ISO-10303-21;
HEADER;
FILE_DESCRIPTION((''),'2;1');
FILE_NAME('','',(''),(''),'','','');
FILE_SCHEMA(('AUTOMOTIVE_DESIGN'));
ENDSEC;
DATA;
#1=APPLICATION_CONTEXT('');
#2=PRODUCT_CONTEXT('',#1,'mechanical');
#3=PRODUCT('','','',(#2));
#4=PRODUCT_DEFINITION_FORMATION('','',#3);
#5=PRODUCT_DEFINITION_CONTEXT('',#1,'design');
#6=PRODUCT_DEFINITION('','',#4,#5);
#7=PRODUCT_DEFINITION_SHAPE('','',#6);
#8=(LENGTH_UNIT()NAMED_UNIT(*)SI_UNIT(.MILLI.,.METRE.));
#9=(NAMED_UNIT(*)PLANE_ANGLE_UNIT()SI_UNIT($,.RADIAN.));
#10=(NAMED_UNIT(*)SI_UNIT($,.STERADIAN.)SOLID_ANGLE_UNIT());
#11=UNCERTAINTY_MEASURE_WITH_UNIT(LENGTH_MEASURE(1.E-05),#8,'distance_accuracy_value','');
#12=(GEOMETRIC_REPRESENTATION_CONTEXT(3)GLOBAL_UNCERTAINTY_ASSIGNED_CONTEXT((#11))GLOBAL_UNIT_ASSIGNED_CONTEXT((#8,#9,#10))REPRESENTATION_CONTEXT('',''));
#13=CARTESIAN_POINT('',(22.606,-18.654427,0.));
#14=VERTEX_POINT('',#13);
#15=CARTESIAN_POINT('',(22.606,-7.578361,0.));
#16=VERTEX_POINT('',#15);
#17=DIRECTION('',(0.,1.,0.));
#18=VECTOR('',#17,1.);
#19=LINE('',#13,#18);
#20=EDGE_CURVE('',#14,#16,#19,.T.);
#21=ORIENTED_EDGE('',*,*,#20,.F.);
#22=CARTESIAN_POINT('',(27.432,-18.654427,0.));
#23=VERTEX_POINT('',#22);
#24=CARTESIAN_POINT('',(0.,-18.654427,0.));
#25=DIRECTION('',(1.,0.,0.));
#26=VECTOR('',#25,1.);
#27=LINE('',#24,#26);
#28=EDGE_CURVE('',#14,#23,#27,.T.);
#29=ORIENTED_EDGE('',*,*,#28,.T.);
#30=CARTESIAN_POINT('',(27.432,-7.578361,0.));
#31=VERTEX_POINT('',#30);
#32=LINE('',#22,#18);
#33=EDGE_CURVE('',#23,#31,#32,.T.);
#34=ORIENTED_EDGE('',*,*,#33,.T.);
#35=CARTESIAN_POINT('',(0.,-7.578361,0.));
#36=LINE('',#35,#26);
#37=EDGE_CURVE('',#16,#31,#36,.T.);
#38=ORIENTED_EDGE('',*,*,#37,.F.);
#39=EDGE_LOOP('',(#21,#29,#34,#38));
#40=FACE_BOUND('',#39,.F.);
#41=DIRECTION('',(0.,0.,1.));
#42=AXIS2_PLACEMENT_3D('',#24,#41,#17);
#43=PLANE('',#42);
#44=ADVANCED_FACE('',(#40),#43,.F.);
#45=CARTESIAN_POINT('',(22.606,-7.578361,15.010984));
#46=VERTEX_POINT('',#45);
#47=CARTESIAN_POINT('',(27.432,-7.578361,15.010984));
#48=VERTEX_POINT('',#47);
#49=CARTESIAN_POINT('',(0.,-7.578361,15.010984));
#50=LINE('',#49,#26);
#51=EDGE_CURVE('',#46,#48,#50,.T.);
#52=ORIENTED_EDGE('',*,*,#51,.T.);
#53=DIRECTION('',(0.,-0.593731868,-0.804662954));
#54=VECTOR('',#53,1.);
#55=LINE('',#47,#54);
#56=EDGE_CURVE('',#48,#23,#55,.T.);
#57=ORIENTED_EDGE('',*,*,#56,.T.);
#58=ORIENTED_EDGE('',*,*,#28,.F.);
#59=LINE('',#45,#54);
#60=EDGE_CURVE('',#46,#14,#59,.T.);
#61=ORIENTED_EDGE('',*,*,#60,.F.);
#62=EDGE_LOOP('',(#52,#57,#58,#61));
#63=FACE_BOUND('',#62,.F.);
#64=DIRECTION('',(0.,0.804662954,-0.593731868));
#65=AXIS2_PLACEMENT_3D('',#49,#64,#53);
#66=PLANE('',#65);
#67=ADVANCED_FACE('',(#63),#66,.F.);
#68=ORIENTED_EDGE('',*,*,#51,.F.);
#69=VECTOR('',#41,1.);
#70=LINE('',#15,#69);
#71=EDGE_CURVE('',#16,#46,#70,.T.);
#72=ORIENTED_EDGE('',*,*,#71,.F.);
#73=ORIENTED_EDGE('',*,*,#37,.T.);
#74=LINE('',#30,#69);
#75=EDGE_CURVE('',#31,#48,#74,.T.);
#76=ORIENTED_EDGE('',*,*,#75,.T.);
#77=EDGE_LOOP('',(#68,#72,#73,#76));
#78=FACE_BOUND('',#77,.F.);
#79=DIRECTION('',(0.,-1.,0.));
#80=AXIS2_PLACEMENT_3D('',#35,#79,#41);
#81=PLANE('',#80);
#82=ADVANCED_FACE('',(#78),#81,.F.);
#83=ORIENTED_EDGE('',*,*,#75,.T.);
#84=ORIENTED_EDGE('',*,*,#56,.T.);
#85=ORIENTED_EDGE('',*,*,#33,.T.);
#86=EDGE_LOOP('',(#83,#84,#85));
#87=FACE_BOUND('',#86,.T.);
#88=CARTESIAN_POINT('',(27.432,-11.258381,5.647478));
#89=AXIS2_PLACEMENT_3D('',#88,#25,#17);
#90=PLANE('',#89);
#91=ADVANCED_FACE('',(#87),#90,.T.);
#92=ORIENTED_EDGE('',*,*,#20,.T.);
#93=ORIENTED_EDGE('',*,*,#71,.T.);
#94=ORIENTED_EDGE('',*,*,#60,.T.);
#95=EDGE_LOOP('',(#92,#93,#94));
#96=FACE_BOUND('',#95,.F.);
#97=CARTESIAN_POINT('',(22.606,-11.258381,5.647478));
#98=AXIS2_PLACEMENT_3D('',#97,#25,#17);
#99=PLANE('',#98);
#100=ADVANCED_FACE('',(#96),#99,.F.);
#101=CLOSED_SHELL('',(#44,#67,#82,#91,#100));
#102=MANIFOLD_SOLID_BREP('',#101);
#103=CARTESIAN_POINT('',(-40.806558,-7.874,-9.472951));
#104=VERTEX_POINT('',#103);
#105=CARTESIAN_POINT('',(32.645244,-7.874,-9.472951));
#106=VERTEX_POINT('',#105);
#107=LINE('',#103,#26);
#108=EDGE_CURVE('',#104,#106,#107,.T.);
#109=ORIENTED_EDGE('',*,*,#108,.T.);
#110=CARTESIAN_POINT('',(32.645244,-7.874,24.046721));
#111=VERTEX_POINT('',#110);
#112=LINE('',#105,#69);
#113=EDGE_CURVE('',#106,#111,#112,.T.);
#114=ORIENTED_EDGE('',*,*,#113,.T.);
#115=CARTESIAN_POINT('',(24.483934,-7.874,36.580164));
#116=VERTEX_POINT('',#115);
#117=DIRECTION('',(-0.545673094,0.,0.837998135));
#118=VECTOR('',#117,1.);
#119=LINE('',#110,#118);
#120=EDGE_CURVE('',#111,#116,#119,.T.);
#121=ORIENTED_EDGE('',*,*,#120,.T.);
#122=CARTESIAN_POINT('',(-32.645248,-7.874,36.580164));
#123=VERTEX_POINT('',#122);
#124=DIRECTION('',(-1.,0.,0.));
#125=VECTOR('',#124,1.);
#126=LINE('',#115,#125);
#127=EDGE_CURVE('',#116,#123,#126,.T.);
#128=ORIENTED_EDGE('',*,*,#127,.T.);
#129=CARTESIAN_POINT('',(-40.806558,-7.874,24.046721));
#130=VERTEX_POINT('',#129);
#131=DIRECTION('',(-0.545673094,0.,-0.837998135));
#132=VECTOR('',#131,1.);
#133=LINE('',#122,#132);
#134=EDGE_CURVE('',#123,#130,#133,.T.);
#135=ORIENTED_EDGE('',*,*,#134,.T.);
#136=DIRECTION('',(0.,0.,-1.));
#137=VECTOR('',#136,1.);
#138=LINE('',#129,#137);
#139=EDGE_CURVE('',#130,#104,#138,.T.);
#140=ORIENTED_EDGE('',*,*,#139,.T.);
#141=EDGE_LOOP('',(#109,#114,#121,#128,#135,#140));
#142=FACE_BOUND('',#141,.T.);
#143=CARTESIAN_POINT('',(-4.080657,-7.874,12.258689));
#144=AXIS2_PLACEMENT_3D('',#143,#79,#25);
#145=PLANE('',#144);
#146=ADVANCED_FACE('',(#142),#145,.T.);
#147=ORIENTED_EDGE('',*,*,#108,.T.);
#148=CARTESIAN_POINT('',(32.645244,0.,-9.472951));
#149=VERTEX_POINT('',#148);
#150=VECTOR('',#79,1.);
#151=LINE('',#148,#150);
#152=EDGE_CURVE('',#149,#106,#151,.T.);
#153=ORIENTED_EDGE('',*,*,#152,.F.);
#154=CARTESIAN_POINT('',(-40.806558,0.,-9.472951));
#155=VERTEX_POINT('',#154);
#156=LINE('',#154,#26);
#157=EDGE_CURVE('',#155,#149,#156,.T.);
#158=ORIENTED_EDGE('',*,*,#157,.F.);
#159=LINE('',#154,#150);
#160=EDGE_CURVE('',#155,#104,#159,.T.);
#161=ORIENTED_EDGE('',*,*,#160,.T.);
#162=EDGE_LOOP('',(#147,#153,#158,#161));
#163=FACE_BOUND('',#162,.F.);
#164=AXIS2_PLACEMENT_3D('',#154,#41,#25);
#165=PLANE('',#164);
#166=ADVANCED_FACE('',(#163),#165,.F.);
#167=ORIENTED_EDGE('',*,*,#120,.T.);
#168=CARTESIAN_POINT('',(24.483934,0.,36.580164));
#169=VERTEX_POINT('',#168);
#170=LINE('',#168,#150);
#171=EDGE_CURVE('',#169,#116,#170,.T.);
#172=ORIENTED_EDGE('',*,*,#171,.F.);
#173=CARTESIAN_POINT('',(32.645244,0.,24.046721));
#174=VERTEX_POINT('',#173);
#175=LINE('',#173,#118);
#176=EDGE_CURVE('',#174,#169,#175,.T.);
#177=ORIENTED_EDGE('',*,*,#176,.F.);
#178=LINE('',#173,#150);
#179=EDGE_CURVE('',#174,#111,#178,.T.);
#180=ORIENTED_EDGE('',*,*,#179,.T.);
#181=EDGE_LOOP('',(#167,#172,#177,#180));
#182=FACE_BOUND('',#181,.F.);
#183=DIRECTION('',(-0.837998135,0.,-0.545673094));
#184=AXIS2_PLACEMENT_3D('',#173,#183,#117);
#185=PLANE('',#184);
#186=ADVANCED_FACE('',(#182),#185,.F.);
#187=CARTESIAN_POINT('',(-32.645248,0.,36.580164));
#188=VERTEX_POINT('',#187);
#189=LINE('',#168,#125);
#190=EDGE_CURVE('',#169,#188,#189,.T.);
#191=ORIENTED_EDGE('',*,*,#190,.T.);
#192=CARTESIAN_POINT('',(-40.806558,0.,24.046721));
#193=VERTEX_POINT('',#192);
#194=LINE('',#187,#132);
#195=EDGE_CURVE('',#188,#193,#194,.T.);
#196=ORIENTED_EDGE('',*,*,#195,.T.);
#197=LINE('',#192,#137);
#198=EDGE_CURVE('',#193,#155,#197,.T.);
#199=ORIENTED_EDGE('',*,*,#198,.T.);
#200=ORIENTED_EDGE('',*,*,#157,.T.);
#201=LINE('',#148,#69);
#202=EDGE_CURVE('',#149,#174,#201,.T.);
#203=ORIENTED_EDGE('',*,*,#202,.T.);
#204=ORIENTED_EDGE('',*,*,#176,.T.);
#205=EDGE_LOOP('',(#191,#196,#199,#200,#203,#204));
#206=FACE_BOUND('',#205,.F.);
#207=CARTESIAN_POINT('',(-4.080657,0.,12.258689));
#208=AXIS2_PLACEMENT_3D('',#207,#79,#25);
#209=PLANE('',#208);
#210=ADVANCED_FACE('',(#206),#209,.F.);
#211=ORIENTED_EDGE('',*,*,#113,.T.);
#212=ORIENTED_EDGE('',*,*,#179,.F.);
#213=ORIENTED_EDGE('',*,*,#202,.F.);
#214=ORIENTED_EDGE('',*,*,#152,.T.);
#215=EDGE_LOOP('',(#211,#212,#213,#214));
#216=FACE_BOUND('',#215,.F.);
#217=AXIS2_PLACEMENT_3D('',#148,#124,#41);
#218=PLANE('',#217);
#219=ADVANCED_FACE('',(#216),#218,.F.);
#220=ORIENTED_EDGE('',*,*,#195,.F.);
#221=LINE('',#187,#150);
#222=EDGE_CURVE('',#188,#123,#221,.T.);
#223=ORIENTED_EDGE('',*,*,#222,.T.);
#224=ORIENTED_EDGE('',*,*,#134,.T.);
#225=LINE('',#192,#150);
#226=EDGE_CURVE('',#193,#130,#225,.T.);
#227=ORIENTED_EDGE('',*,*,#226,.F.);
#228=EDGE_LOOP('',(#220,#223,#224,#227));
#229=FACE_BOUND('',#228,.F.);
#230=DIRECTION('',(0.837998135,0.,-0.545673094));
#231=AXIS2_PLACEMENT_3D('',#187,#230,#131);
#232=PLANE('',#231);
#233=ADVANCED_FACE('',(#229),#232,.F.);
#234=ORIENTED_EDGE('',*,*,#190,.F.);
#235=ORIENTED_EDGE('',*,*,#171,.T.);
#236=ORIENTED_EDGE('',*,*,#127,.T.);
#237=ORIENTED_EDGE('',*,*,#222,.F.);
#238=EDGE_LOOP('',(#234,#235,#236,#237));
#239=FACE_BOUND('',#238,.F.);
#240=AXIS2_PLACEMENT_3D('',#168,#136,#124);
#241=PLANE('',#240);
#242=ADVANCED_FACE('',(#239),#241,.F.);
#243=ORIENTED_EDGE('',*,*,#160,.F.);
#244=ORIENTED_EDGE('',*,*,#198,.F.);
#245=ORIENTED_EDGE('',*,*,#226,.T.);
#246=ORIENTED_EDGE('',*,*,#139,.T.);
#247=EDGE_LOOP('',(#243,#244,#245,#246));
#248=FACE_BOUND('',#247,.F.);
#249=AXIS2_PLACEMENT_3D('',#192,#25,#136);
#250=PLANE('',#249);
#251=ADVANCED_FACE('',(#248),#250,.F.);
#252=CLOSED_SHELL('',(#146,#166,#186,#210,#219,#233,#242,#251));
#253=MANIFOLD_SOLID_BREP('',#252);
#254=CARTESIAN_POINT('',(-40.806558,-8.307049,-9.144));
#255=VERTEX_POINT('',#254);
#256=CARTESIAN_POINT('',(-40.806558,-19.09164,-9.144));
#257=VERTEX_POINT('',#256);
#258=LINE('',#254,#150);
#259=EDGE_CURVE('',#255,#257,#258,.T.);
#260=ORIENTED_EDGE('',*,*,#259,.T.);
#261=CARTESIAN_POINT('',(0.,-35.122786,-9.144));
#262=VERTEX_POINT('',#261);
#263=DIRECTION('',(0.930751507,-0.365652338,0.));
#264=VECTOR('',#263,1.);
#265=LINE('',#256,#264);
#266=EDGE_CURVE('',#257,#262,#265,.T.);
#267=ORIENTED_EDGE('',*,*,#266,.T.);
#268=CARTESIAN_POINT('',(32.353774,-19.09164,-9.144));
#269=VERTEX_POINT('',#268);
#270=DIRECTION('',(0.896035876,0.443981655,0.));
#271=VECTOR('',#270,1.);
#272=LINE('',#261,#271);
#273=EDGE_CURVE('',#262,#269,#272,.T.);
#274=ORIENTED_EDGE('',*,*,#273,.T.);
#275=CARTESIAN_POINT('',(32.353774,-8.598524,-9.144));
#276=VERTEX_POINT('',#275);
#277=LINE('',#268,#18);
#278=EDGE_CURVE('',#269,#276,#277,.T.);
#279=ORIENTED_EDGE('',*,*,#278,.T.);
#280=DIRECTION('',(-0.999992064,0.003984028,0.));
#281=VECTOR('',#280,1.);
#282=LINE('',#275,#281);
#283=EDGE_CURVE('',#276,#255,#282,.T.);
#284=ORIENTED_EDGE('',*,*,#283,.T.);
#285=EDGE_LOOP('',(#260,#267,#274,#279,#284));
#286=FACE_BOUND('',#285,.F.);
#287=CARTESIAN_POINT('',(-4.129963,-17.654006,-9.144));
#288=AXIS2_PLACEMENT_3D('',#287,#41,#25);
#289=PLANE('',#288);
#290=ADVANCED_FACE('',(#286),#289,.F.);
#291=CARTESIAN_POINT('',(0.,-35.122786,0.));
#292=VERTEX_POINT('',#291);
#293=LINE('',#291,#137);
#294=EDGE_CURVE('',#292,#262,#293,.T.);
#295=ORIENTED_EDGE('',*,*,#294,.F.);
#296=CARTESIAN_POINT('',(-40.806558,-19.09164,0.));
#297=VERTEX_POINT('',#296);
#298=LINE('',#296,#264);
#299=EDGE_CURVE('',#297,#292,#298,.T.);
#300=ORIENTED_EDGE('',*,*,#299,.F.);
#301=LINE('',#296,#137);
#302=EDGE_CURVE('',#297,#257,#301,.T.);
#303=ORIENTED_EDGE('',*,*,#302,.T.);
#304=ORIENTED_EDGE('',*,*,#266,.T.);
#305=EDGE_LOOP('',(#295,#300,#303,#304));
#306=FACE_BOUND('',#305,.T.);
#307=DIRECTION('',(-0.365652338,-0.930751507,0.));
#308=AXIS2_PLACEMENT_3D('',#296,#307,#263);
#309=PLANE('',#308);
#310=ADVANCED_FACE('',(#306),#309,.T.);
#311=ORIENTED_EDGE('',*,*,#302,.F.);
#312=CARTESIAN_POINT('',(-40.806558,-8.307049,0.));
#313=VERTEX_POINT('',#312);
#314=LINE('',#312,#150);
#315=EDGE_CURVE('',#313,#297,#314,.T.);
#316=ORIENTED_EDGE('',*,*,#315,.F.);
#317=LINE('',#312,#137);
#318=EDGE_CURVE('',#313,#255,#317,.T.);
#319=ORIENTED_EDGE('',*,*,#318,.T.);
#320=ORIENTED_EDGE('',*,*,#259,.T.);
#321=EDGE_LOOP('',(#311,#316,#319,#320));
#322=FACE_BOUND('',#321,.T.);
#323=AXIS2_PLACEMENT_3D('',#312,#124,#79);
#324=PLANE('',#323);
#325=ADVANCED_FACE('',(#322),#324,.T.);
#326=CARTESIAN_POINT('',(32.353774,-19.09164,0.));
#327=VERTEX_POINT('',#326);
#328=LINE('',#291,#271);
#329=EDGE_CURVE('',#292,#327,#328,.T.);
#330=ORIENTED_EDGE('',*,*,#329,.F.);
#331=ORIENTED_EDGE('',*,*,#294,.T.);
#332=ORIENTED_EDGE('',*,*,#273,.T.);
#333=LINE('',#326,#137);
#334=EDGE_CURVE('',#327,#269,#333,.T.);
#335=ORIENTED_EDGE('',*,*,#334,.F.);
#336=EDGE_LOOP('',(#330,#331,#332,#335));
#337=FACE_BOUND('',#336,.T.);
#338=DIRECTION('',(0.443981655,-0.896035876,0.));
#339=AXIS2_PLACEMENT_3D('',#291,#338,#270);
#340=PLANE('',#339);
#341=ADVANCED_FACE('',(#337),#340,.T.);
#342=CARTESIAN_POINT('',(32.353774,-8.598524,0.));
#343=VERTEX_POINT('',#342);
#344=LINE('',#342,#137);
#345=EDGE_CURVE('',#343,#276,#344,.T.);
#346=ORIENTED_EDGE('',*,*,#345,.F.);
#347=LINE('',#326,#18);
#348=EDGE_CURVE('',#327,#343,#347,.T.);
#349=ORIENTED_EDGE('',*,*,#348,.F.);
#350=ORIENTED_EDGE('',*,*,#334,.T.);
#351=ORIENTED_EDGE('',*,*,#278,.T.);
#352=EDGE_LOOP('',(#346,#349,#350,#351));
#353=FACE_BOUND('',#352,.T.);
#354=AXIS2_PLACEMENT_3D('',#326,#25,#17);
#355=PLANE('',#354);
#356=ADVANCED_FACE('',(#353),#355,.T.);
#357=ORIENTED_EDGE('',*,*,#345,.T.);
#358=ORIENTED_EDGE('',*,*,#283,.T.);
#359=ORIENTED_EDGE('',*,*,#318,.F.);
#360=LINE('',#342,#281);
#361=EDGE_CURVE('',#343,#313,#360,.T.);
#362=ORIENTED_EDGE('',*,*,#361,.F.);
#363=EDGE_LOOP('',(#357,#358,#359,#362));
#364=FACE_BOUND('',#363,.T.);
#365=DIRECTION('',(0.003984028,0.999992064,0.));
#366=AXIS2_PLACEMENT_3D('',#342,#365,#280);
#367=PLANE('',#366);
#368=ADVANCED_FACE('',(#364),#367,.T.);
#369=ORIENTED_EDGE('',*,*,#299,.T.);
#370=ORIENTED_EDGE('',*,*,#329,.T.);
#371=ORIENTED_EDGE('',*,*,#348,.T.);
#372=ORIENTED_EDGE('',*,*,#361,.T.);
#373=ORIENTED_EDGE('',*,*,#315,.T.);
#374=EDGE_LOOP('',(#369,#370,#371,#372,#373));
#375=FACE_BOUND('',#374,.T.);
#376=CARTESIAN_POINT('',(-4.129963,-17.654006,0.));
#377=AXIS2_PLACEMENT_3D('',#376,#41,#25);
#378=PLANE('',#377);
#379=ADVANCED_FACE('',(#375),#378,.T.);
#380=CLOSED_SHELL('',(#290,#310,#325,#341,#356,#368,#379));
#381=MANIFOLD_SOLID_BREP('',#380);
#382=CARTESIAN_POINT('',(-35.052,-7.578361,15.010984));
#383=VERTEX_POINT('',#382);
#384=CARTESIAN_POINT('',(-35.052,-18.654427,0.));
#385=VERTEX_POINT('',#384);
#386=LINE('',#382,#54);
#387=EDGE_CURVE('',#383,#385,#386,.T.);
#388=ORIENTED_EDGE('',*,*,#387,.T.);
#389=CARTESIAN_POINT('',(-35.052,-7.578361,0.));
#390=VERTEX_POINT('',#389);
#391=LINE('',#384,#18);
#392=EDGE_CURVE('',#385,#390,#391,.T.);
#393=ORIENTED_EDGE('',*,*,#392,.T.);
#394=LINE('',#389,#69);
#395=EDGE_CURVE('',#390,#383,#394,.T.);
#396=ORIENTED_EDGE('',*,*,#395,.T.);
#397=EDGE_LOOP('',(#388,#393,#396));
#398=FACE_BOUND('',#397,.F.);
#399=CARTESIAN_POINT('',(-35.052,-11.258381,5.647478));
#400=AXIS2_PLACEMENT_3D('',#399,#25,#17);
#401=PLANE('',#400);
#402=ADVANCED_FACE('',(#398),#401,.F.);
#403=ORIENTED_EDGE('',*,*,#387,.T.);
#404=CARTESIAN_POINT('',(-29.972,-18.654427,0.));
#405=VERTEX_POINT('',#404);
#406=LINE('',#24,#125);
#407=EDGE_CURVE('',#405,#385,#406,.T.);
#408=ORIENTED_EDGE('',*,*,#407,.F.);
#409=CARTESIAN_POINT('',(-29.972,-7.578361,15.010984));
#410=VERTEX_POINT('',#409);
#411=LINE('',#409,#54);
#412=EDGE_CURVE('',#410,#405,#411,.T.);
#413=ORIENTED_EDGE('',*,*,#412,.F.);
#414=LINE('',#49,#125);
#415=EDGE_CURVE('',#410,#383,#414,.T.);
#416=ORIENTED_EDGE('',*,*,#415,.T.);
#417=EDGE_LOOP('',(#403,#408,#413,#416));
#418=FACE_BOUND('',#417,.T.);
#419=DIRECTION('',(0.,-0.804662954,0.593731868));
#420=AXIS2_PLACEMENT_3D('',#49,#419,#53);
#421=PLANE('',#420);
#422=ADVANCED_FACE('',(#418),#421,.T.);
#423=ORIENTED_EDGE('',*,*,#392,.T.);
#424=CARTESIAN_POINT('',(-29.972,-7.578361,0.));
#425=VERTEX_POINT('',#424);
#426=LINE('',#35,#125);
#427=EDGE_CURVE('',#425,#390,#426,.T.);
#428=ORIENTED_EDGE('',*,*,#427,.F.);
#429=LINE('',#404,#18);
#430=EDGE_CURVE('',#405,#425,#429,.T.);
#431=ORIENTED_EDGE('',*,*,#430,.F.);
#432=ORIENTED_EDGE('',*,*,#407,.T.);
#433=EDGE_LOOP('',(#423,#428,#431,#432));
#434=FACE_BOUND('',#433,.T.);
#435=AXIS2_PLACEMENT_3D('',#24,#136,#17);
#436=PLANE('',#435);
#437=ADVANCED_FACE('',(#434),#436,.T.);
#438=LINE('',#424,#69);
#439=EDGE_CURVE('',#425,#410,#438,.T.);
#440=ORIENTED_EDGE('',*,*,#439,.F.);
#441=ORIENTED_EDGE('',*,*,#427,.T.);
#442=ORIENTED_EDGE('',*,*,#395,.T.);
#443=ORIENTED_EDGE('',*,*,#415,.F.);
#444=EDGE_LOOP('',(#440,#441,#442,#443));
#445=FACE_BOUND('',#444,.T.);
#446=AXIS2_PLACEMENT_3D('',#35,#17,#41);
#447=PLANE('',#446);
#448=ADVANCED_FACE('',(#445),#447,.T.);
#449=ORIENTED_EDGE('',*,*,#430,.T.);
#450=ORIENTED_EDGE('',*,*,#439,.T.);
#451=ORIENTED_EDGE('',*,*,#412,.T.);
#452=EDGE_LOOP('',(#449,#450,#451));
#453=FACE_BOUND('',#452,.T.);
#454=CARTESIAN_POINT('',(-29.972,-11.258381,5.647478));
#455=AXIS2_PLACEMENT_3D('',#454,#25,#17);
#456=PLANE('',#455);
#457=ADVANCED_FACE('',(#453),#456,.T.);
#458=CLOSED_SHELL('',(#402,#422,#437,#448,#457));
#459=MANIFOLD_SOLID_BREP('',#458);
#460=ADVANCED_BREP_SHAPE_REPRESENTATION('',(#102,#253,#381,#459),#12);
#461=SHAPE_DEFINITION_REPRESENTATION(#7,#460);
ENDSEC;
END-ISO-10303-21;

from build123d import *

# Parameters (mm, degrees)
F1_DEPTH = 7.874
F3_DEPTH = 9.144
F5_DEPTH = 27.432
F6_DEPTH = 22.606
F7_DEPTH = 35.052
F8_DEPTH = 29.972


with BuildPart() as f1:
    # F0 (on Front) → F1 (new body)
    with BuildSketch(Plane.XZ):
        Polygon((24.4839340448, 36.5801639855), (-32.6452478766, 36.5801639855), (-40.8065579832, 24.0467209369), (-40.8065579832, -9.472951293), (32.6452441514, -9.472951293), (32.6452441514, 24.0467209369), align=None)
    extrude(amount=F1_DEPTH)


with BuildPart() as f3:
    # F2 (on Top) → F3 (new body)
    with BuildSketch(Plane.XY):
        Polygon((32.3537737131, -8.5985241458), (-40.8065579832, -8.3070490509), (-40.8065579832, -19.0916396677), (0, -35.1227857172), (32.3537737131, -19.0916396677), align=None)
    extrude(amount=-F3_DEPTH)


with BuildPart() as f5:
    # F4 (on Right) → F5 (new body)
    with BuildSketch(Plane.YZ):
        Polygon((-18.6544265598, 0), (-7.5783613138, 0), (-7.5783613138, 15.0109836832), align=None)
    extrude(amount=F5_DEPTH)

    # F6 (cut): a face of the model
    f6_faces = [f5.faces().sort_by_distance(p)[0] for p in [
        (0, -11.2703830625, 5.0036612277),
    ]]
    extrude(f6_faces, amount=-F6_DEPTH, mode=Mode.SUBTRACT)


with BuildPart() as f7:
    # F4 (on Right) → F7 (new body)
    with BuildSketch(Plane.YZ):
        Polygon((-18.6544265598, 0), (-7.5783613138, 0), (-7.5783613138, 15.0109836832), align=None)
    extrude(amount=-F7_DEPTH)

    # F8 (cut): a face of the model
    f8_faces = [f7.faces().sort_by_distance(p)[0] for p in [
        (0, -11.2703830625, 5.0036612277),
    ]]
    extrude(f8_faces, amount=-F8_DEPTH, mode=Mode.SUBTRACT)


solid = Compound([f1.part, f3.part, f5.part, f7.part])
